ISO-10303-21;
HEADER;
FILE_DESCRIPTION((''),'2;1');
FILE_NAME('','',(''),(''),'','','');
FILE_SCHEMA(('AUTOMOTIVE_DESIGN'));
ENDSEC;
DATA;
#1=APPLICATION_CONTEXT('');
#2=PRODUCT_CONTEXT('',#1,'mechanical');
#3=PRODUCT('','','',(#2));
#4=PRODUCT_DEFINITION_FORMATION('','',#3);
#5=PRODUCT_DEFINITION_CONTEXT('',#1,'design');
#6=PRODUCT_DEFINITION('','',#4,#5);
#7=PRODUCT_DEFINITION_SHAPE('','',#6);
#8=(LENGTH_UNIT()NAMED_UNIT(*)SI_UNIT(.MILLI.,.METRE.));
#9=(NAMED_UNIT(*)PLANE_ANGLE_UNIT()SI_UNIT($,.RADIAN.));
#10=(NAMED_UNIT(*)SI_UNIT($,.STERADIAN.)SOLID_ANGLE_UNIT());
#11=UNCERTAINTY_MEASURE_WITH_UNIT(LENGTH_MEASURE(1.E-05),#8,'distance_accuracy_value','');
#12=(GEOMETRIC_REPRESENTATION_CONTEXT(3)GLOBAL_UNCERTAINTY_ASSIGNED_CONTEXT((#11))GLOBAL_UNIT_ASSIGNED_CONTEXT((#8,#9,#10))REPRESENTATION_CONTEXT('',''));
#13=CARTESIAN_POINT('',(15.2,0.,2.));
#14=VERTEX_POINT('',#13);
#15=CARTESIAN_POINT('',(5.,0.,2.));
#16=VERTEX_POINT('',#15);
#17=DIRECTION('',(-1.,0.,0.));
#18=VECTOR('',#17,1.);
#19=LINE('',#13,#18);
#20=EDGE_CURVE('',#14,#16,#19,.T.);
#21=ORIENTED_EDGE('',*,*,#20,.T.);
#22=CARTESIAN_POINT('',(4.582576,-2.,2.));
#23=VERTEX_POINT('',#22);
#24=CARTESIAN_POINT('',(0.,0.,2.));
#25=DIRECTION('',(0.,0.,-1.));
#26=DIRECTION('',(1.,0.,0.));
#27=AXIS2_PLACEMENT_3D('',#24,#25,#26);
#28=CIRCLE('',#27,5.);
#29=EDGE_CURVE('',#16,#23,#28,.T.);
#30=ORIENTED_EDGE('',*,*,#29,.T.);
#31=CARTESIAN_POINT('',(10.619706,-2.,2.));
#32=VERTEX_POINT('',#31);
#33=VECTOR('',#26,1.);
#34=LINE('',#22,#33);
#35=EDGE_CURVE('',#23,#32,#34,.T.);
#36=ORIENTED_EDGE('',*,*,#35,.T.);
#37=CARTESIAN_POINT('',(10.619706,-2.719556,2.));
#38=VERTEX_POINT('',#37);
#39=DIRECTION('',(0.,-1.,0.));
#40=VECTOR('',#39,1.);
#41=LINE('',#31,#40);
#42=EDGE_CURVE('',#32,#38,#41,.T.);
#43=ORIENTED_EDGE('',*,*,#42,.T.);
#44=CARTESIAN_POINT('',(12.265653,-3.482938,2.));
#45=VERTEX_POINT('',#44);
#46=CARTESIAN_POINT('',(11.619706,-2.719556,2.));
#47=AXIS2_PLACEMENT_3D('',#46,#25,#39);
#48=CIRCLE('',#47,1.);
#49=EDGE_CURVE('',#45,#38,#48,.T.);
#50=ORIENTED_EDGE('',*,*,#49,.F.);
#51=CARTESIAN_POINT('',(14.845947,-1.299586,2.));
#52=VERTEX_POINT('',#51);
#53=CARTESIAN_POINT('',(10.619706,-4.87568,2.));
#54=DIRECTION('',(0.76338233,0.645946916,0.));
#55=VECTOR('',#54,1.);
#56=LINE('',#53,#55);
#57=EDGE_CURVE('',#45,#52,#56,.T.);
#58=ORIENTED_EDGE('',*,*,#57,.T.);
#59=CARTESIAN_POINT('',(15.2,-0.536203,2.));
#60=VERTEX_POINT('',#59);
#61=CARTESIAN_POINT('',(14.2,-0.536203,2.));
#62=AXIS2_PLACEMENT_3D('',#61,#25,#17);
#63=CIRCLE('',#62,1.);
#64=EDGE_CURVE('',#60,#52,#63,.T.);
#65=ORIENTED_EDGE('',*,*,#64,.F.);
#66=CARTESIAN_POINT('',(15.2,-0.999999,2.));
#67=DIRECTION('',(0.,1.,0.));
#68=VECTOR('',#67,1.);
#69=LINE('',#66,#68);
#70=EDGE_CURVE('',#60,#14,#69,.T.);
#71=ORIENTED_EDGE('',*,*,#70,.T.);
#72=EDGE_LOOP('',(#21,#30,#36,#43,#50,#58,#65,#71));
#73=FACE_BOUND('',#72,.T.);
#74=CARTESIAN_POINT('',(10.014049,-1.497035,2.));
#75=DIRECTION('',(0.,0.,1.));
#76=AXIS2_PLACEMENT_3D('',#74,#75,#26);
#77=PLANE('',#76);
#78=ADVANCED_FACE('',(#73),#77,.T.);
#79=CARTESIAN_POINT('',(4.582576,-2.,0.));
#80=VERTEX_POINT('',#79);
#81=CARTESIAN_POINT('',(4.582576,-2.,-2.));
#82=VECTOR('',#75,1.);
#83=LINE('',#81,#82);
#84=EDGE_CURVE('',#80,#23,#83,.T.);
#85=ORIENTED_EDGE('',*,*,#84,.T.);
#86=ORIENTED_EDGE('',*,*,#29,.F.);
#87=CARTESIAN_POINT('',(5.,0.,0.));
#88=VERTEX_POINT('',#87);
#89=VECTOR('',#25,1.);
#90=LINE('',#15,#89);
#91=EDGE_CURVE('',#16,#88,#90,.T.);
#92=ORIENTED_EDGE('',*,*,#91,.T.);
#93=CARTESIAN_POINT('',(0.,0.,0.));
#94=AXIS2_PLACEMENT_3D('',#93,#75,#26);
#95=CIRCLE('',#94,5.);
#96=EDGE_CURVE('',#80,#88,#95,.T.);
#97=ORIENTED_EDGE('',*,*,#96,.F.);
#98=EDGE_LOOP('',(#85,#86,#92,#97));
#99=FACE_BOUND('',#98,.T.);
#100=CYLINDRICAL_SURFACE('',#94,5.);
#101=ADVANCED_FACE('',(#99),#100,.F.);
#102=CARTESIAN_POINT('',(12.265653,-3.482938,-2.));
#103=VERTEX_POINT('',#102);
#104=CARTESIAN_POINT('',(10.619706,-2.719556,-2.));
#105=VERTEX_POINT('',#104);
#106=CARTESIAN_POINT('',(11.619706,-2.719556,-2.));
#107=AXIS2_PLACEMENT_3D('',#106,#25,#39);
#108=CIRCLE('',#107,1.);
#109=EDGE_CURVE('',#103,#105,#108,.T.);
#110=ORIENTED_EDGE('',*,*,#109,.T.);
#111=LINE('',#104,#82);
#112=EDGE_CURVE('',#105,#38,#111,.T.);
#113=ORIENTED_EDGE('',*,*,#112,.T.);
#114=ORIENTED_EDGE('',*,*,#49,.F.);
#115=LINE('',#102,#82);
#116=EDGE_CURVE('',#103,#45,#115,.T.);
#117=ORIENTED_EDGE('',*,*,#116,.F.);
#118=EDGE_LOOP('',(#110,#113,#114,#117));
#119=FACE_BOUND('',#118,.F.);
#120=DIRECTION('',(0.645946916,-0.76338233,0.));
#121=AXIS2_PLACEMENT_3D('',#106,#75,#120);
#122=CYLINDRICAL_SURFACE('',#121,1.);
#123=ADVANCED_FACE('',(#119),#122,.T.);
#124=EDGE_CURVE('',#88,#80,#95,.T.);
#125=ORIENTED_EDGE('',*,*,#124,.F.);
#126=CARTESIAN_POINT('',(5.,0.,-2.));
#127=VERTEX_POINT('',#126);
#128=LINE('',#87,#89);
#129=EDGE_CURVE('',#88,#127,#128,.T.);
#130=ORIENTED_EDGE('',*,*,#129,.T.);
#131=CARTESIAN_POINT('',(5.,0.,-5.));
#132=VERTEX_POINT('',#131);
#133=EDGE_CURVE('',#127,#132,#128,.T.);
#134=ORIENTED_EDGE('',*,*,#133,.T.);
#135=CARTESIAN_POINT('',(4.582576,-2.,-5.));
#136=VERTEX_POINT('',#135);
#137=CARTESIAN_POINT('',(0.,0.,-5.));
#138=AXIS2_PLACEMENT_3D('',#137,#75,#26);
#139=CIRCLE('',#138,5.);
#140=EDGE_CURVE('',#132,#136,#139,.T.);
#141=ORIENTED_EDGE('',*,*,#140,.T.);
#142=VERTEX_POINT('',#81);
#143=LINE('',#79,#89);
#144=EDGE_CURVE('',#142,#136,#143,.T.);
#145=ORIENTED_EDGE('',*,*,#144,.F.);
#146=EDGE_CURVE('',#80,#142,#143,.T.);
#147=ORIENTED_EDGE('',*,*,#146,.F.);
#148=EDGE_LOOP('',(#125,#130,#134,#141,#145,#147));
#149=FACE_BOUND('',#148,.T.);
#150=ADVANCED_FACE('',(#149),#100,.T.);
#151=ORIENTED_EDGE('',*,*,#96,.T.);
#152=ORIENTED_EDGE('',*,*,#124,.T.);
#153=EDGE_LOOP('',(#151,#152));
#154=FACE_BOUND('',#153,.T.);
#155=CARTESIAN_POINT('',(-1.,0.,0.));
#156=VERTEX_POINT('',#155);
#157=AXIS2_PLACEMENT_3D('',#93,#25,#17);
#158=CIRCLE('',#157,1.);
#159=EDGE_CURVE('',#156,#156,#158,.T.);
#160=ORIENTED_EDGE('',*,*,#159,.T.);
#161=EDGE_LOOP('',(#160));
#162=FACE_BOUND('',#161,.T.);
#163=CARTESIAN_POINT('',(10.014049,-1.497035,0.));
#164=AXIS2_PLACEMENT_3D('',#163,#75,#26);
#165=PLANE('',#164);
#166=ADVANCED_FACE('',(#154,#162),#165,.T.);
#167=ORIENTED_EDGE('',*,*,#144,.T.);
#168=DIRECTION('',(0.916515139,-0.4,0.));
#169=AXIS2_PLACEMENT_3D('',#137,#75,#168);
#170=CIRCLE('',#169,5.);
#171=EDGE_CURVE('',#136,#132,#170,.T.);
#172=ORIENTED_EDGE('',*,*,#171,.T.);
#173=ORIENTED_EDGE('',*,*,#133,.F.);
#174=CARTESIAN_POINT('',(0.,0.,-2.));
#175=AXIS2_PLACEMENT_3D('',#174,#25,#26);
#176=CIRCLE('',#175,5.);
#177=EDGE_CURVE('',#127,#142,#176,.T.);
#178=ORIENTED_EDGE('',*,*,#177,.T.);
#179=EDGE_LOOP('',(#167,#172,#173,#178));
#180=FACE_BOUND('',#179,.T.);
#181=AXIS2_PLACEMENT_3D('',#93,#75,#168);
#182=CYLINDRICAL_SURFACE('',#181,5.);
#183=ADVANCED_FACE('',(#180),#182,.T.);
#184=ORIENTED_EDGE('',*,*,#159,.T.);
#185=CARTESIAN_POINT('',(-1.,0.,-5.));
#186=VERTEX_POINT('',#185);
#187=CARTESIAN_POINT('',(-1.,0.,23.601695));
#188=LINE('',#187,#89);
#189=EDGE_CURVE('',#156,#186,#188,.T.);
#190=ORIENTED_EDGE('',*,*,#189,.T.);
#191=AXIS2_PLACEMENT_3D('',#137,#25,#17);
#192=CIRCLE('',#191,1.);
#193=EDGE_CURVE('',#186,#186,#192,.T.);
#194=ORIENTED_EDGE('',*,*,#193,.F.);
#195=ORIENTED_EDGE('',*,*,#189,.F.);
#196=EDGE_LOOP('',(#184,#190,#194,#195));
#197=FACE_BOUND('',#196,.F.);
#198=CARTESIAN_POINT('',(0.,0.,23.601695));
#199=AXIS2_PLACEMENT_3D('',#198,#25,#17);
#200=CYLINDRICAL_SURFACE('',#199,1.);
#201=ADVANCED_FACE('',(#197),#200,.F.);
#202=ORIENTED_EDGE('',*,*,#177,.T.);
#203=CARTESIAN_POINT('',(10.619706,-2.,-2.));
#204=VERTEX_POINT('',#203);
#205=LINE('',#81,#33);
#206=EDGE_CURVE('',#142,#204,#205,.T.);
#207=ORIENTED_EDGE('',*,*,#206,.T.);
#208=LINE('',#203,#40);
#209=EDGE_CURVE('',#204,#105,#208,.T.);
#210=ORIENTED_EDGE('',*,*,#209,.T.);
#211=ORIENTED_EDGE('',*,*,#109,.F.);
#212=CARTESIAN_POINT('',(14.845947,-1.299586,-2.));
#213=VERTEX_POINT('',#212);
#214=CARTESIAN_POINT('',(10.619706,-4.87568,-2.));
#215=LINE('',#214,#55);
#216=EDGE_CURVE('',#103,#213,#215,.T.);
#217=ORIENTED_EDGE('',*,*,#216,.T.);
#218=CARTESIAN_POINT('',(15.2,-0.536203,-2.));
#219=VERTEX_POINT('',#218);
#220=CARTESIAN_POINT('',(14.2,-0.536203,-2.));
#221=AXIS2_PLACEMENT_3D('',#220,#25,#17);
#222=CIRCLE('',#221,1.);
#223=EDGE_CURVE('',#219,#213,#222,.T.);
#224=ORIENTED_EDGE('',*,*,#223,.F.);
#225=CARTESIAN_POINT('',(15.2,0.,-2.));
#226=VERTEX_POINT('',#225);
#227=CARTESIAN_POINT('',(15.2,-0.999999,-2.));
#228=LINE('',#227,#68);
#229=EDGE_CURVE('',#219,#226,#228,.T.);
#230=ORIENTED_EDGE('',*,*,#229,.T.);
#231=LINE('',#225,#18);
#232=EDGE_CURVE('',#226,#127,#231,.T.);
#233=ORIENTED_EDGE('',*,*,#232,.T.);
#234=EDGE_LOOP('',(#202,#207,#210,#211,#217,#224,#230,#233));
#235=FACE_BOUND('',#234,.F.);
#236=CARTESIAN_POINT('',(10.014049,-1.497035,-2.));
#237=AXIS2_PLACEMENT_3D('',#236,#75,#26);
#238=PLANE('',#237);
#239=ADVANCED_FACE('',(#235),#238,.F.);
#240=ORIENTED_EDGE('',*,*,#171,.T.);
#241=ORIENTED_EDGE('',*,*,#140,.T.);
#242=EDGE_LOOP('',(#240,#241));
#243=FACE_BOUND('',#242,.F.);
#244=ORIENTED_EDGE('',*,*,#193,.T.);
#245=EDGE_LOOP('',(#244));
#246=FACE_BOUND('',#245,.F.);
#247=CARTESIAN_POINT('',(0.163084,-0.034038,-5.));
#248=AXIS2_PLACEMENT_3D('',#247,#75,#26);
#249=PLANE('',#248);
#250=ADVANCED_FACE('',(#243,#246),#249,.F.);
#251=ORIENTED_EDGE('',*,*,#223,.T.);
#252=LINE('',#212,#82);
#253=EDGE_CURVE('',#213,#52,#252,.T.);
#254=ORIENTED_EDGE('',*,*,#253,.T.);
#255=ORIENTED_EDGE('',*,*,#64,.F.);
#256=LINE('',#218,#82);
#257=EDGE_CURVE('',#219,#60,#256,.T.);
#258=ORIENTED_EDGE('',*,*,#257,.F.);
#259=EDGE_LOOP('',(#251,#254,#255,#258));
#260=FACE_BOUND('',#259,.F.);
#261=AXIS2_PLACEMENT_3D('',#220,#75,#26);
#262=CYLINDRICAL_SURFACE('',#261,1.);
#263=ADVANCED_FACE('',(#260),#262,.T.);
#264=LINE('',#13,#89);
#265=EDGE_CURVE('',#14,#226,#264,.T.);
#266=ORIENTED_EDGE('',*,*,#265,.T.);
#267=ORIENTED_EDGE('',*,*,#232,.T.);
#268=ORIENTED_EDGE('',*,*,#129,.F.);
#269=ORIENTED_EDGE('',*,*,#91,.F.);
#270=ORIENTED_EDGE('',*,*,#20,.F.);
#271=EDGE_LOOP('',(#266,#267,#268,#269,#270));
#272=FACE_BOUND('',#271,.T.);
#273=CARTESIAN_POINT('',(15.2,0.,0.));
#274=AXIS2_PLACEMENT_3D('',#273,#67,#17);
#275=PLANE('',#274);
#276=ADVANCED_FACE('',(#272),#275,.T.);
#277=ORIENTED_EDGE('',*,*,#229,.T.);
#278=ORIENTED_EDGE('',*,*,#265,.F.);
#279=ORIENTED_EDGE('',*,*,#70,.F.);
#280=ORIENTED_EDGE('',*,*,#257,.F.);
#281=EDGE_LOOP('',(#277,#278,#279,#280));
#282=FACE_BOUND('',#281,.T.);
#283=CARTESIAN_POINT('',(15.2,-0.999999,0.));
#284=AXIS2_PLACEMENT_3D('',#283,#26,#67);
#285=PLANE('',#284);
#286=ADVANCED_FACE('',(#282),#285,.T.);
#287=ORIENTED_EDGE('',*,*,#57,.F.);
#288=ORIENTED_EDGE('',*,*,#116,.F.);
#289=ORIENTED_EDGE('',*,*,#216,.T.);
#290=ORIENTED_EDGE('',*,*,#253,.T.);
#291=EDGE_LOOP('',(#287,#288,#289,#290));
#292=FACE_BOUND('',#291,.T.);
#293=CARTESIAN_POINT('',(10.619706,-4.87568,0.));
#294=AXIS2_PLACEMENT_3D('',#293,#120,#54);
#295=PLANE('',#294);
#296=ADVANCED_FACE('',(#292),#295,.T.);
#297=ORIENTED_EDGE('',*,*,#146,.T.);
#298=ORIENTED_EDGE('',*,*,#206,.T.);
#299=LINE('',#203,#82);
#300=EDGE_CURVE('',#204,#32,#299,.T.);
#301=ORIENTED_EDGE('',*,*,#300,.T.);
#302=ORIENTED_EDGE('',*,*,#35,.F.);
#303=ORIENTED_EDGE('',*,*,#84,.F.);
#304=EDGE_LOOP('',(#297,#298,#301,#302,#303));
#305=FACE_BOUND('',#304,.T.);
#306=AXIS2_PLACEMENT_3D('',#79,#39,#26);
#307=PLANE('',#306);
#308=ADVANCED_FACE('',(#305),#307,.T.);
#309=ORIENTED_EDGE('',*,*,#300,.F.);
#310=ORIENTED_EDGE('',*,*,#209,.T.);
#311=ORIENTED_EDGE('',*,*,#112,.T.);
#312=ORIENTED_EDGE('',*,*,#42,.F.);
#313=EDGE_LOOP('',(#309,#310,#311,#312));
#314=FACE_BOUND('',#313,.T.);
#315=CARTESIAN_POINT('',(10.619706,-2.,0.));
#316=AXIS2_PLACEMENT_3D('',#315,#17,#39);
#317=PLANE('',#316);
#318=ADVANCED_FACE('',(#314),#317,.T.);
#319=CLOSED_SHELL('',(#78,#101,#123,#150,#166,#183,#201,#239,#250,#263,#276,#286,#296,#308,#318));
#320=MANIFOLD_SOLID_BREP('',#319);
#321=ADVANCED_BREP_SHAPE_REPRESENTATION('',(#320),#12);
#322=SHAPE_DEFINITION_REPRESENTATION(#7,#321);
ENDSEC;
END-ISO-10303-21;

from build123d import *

# Parameters (mm, degrees)
F1_DEPTH = 5
F2_DEPTH = 2
F3_DEPTH = 2
F4_R     = 1
F5_D     = 2


with BuildPart() as f1:
    # F0 (on Top) → F1 (new body)
    with BuildSketch(Plane.XY):
        with BuildLine():
            ThreePointArc((4.582575695, -2), (4.8945315647, -1.0215482184), (5, 0))
            ThreePointArc((5, 0), (-4.8945315647, 1.0215482184), (4.582575695, -2))
        make_face()
    extrude(amount=-F1_DEPTH)

    # F0 (on Top) → F2 (join)
    with BuildSketch(Plane.XY):
        with BuildLine():
            Line((13, 0), (5, 0))
            ThreePointArc((5, 0), (4.8945315647, -1.0215482184), (4.582575695, -2))
            Line((4.582575695, -2), (10.6197060227, -2))
            Line((10.6197060227, -2), (10.6197060227, -4.87568))
            Line((10.6197060227, -4.87568), (15.2, -0.999998501))
            Line((15.2, -0.999998501), (15.2, 0))
            Line((15.2, 0), (13, 0))
        make_face()
    extrude(amount=-F2_DEPTH)

    # F0 (on Top) → F3 (join, symmetric)
    with BuildSketch(Plane.XY):
        with BuildLine():
            Line((13, 0), (5, 0))
            ThreePointArc((5, 0), (4.8945315647, -1.0215482184), (4.582575695, -2))
            Line((4.582575695, -2), (10.6197060227, -2))
            Line((10.6197060227, -2), (10.6197060227, -4.87568))
            Line((10.6197060227, -4.87568), (15.2, -0.999998501))
            Line((15.2, -0.999998501), (15.2, 0))
            Line((15.2, 0), (13, 0))
        make_face()
    extrude(amount=F3_DEPTH, both=True)

    # F4
    f4_edges = [f1.edges().sort_by_distance(p)[0] for p in [
        (10.619706, -4.87568, 0),
        (15.2, -0.999999, 0),
    ]]
    fillet(f4_edges, radius=F4_R)

    # F5 (through all)
    with Locations(Plane.XY):
        with Locations((0, 0)):
            Hole(F5_D / 2)


solid = f1.part
